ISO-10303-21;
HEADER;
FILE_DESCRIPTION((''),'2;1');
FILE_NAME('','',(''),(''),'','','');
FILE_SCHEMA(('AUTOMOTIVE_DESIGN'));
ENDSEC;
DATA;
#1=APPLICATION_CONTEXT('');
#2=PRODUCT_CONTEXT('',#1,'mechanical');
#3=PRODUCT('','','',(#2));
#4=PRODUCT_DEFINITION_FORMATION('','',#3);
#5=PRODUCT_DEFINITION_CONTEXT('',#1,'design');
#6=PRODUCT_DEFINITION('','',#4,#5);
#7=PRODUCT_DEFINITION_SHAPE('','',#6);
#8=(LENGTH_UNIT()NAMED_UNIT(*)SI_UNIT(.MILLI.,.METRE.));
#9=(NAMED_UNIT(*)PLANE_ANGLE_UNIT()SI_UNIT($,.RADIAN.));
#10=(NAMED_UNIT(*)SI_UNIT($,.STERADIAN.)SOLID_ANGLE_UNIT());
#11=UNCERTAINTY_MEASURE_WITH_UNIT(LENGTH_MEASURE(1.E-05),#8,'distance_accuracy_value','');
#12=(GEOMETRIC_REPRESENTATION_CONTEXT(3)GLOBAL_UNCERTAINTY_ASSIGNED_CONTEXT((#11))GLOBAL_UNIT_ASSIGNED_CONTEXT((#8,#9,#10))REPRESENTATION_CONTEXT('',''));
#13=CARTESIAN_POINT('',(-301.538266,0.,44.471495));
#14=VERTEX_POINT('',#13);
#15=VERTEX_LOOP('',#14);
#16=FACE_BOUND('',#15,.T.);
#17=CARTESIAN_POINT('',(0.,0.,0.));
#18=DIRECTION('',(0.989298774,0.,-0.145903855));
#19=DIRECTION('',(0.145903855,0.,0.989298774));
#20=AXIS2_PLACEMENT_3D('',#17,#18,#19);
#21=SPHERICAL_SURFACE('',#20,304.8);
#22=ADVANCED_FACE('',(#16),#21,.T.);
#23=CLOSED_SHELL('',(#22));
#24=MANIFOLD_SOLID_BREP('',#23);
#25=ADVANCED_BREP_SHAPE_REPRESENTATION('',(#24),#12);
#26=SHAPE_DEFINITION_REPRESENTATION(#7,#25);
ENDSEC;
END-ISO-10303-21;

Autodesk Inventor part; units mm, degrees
ref_plane "YZ Plane" through (0, 0, 0) normal (1, 0, 0) x (0, 1, 0)
ref_plane "XZ Plane" through (0, 0, 0) normal (0, 1, 0) x (-1, 0, 0)
ref_plane "XY Plane" through (0, 0, 0) normal (0, 0, 1) x (1, 0, 0)
sketch "Sketch1" plane through (0, 0, 0) normal (0, 1, 0) x (-1, 0, 0)
  circle A0 centre (0, 0) radius 304.8
  line L0 (301.5383, 44.4715) -> (-301.5383, -44.4715)
  dimension "d0" = 609.6
revolve "Revolution1" add sketch "Sketch1" angle 360 about axis through (-301.5383, 0, 44.4715) along (0.9892988, 0, -0.1459038) picked at (58.0697, 109.5076) contours L0 A0
properties part number "Ball"
